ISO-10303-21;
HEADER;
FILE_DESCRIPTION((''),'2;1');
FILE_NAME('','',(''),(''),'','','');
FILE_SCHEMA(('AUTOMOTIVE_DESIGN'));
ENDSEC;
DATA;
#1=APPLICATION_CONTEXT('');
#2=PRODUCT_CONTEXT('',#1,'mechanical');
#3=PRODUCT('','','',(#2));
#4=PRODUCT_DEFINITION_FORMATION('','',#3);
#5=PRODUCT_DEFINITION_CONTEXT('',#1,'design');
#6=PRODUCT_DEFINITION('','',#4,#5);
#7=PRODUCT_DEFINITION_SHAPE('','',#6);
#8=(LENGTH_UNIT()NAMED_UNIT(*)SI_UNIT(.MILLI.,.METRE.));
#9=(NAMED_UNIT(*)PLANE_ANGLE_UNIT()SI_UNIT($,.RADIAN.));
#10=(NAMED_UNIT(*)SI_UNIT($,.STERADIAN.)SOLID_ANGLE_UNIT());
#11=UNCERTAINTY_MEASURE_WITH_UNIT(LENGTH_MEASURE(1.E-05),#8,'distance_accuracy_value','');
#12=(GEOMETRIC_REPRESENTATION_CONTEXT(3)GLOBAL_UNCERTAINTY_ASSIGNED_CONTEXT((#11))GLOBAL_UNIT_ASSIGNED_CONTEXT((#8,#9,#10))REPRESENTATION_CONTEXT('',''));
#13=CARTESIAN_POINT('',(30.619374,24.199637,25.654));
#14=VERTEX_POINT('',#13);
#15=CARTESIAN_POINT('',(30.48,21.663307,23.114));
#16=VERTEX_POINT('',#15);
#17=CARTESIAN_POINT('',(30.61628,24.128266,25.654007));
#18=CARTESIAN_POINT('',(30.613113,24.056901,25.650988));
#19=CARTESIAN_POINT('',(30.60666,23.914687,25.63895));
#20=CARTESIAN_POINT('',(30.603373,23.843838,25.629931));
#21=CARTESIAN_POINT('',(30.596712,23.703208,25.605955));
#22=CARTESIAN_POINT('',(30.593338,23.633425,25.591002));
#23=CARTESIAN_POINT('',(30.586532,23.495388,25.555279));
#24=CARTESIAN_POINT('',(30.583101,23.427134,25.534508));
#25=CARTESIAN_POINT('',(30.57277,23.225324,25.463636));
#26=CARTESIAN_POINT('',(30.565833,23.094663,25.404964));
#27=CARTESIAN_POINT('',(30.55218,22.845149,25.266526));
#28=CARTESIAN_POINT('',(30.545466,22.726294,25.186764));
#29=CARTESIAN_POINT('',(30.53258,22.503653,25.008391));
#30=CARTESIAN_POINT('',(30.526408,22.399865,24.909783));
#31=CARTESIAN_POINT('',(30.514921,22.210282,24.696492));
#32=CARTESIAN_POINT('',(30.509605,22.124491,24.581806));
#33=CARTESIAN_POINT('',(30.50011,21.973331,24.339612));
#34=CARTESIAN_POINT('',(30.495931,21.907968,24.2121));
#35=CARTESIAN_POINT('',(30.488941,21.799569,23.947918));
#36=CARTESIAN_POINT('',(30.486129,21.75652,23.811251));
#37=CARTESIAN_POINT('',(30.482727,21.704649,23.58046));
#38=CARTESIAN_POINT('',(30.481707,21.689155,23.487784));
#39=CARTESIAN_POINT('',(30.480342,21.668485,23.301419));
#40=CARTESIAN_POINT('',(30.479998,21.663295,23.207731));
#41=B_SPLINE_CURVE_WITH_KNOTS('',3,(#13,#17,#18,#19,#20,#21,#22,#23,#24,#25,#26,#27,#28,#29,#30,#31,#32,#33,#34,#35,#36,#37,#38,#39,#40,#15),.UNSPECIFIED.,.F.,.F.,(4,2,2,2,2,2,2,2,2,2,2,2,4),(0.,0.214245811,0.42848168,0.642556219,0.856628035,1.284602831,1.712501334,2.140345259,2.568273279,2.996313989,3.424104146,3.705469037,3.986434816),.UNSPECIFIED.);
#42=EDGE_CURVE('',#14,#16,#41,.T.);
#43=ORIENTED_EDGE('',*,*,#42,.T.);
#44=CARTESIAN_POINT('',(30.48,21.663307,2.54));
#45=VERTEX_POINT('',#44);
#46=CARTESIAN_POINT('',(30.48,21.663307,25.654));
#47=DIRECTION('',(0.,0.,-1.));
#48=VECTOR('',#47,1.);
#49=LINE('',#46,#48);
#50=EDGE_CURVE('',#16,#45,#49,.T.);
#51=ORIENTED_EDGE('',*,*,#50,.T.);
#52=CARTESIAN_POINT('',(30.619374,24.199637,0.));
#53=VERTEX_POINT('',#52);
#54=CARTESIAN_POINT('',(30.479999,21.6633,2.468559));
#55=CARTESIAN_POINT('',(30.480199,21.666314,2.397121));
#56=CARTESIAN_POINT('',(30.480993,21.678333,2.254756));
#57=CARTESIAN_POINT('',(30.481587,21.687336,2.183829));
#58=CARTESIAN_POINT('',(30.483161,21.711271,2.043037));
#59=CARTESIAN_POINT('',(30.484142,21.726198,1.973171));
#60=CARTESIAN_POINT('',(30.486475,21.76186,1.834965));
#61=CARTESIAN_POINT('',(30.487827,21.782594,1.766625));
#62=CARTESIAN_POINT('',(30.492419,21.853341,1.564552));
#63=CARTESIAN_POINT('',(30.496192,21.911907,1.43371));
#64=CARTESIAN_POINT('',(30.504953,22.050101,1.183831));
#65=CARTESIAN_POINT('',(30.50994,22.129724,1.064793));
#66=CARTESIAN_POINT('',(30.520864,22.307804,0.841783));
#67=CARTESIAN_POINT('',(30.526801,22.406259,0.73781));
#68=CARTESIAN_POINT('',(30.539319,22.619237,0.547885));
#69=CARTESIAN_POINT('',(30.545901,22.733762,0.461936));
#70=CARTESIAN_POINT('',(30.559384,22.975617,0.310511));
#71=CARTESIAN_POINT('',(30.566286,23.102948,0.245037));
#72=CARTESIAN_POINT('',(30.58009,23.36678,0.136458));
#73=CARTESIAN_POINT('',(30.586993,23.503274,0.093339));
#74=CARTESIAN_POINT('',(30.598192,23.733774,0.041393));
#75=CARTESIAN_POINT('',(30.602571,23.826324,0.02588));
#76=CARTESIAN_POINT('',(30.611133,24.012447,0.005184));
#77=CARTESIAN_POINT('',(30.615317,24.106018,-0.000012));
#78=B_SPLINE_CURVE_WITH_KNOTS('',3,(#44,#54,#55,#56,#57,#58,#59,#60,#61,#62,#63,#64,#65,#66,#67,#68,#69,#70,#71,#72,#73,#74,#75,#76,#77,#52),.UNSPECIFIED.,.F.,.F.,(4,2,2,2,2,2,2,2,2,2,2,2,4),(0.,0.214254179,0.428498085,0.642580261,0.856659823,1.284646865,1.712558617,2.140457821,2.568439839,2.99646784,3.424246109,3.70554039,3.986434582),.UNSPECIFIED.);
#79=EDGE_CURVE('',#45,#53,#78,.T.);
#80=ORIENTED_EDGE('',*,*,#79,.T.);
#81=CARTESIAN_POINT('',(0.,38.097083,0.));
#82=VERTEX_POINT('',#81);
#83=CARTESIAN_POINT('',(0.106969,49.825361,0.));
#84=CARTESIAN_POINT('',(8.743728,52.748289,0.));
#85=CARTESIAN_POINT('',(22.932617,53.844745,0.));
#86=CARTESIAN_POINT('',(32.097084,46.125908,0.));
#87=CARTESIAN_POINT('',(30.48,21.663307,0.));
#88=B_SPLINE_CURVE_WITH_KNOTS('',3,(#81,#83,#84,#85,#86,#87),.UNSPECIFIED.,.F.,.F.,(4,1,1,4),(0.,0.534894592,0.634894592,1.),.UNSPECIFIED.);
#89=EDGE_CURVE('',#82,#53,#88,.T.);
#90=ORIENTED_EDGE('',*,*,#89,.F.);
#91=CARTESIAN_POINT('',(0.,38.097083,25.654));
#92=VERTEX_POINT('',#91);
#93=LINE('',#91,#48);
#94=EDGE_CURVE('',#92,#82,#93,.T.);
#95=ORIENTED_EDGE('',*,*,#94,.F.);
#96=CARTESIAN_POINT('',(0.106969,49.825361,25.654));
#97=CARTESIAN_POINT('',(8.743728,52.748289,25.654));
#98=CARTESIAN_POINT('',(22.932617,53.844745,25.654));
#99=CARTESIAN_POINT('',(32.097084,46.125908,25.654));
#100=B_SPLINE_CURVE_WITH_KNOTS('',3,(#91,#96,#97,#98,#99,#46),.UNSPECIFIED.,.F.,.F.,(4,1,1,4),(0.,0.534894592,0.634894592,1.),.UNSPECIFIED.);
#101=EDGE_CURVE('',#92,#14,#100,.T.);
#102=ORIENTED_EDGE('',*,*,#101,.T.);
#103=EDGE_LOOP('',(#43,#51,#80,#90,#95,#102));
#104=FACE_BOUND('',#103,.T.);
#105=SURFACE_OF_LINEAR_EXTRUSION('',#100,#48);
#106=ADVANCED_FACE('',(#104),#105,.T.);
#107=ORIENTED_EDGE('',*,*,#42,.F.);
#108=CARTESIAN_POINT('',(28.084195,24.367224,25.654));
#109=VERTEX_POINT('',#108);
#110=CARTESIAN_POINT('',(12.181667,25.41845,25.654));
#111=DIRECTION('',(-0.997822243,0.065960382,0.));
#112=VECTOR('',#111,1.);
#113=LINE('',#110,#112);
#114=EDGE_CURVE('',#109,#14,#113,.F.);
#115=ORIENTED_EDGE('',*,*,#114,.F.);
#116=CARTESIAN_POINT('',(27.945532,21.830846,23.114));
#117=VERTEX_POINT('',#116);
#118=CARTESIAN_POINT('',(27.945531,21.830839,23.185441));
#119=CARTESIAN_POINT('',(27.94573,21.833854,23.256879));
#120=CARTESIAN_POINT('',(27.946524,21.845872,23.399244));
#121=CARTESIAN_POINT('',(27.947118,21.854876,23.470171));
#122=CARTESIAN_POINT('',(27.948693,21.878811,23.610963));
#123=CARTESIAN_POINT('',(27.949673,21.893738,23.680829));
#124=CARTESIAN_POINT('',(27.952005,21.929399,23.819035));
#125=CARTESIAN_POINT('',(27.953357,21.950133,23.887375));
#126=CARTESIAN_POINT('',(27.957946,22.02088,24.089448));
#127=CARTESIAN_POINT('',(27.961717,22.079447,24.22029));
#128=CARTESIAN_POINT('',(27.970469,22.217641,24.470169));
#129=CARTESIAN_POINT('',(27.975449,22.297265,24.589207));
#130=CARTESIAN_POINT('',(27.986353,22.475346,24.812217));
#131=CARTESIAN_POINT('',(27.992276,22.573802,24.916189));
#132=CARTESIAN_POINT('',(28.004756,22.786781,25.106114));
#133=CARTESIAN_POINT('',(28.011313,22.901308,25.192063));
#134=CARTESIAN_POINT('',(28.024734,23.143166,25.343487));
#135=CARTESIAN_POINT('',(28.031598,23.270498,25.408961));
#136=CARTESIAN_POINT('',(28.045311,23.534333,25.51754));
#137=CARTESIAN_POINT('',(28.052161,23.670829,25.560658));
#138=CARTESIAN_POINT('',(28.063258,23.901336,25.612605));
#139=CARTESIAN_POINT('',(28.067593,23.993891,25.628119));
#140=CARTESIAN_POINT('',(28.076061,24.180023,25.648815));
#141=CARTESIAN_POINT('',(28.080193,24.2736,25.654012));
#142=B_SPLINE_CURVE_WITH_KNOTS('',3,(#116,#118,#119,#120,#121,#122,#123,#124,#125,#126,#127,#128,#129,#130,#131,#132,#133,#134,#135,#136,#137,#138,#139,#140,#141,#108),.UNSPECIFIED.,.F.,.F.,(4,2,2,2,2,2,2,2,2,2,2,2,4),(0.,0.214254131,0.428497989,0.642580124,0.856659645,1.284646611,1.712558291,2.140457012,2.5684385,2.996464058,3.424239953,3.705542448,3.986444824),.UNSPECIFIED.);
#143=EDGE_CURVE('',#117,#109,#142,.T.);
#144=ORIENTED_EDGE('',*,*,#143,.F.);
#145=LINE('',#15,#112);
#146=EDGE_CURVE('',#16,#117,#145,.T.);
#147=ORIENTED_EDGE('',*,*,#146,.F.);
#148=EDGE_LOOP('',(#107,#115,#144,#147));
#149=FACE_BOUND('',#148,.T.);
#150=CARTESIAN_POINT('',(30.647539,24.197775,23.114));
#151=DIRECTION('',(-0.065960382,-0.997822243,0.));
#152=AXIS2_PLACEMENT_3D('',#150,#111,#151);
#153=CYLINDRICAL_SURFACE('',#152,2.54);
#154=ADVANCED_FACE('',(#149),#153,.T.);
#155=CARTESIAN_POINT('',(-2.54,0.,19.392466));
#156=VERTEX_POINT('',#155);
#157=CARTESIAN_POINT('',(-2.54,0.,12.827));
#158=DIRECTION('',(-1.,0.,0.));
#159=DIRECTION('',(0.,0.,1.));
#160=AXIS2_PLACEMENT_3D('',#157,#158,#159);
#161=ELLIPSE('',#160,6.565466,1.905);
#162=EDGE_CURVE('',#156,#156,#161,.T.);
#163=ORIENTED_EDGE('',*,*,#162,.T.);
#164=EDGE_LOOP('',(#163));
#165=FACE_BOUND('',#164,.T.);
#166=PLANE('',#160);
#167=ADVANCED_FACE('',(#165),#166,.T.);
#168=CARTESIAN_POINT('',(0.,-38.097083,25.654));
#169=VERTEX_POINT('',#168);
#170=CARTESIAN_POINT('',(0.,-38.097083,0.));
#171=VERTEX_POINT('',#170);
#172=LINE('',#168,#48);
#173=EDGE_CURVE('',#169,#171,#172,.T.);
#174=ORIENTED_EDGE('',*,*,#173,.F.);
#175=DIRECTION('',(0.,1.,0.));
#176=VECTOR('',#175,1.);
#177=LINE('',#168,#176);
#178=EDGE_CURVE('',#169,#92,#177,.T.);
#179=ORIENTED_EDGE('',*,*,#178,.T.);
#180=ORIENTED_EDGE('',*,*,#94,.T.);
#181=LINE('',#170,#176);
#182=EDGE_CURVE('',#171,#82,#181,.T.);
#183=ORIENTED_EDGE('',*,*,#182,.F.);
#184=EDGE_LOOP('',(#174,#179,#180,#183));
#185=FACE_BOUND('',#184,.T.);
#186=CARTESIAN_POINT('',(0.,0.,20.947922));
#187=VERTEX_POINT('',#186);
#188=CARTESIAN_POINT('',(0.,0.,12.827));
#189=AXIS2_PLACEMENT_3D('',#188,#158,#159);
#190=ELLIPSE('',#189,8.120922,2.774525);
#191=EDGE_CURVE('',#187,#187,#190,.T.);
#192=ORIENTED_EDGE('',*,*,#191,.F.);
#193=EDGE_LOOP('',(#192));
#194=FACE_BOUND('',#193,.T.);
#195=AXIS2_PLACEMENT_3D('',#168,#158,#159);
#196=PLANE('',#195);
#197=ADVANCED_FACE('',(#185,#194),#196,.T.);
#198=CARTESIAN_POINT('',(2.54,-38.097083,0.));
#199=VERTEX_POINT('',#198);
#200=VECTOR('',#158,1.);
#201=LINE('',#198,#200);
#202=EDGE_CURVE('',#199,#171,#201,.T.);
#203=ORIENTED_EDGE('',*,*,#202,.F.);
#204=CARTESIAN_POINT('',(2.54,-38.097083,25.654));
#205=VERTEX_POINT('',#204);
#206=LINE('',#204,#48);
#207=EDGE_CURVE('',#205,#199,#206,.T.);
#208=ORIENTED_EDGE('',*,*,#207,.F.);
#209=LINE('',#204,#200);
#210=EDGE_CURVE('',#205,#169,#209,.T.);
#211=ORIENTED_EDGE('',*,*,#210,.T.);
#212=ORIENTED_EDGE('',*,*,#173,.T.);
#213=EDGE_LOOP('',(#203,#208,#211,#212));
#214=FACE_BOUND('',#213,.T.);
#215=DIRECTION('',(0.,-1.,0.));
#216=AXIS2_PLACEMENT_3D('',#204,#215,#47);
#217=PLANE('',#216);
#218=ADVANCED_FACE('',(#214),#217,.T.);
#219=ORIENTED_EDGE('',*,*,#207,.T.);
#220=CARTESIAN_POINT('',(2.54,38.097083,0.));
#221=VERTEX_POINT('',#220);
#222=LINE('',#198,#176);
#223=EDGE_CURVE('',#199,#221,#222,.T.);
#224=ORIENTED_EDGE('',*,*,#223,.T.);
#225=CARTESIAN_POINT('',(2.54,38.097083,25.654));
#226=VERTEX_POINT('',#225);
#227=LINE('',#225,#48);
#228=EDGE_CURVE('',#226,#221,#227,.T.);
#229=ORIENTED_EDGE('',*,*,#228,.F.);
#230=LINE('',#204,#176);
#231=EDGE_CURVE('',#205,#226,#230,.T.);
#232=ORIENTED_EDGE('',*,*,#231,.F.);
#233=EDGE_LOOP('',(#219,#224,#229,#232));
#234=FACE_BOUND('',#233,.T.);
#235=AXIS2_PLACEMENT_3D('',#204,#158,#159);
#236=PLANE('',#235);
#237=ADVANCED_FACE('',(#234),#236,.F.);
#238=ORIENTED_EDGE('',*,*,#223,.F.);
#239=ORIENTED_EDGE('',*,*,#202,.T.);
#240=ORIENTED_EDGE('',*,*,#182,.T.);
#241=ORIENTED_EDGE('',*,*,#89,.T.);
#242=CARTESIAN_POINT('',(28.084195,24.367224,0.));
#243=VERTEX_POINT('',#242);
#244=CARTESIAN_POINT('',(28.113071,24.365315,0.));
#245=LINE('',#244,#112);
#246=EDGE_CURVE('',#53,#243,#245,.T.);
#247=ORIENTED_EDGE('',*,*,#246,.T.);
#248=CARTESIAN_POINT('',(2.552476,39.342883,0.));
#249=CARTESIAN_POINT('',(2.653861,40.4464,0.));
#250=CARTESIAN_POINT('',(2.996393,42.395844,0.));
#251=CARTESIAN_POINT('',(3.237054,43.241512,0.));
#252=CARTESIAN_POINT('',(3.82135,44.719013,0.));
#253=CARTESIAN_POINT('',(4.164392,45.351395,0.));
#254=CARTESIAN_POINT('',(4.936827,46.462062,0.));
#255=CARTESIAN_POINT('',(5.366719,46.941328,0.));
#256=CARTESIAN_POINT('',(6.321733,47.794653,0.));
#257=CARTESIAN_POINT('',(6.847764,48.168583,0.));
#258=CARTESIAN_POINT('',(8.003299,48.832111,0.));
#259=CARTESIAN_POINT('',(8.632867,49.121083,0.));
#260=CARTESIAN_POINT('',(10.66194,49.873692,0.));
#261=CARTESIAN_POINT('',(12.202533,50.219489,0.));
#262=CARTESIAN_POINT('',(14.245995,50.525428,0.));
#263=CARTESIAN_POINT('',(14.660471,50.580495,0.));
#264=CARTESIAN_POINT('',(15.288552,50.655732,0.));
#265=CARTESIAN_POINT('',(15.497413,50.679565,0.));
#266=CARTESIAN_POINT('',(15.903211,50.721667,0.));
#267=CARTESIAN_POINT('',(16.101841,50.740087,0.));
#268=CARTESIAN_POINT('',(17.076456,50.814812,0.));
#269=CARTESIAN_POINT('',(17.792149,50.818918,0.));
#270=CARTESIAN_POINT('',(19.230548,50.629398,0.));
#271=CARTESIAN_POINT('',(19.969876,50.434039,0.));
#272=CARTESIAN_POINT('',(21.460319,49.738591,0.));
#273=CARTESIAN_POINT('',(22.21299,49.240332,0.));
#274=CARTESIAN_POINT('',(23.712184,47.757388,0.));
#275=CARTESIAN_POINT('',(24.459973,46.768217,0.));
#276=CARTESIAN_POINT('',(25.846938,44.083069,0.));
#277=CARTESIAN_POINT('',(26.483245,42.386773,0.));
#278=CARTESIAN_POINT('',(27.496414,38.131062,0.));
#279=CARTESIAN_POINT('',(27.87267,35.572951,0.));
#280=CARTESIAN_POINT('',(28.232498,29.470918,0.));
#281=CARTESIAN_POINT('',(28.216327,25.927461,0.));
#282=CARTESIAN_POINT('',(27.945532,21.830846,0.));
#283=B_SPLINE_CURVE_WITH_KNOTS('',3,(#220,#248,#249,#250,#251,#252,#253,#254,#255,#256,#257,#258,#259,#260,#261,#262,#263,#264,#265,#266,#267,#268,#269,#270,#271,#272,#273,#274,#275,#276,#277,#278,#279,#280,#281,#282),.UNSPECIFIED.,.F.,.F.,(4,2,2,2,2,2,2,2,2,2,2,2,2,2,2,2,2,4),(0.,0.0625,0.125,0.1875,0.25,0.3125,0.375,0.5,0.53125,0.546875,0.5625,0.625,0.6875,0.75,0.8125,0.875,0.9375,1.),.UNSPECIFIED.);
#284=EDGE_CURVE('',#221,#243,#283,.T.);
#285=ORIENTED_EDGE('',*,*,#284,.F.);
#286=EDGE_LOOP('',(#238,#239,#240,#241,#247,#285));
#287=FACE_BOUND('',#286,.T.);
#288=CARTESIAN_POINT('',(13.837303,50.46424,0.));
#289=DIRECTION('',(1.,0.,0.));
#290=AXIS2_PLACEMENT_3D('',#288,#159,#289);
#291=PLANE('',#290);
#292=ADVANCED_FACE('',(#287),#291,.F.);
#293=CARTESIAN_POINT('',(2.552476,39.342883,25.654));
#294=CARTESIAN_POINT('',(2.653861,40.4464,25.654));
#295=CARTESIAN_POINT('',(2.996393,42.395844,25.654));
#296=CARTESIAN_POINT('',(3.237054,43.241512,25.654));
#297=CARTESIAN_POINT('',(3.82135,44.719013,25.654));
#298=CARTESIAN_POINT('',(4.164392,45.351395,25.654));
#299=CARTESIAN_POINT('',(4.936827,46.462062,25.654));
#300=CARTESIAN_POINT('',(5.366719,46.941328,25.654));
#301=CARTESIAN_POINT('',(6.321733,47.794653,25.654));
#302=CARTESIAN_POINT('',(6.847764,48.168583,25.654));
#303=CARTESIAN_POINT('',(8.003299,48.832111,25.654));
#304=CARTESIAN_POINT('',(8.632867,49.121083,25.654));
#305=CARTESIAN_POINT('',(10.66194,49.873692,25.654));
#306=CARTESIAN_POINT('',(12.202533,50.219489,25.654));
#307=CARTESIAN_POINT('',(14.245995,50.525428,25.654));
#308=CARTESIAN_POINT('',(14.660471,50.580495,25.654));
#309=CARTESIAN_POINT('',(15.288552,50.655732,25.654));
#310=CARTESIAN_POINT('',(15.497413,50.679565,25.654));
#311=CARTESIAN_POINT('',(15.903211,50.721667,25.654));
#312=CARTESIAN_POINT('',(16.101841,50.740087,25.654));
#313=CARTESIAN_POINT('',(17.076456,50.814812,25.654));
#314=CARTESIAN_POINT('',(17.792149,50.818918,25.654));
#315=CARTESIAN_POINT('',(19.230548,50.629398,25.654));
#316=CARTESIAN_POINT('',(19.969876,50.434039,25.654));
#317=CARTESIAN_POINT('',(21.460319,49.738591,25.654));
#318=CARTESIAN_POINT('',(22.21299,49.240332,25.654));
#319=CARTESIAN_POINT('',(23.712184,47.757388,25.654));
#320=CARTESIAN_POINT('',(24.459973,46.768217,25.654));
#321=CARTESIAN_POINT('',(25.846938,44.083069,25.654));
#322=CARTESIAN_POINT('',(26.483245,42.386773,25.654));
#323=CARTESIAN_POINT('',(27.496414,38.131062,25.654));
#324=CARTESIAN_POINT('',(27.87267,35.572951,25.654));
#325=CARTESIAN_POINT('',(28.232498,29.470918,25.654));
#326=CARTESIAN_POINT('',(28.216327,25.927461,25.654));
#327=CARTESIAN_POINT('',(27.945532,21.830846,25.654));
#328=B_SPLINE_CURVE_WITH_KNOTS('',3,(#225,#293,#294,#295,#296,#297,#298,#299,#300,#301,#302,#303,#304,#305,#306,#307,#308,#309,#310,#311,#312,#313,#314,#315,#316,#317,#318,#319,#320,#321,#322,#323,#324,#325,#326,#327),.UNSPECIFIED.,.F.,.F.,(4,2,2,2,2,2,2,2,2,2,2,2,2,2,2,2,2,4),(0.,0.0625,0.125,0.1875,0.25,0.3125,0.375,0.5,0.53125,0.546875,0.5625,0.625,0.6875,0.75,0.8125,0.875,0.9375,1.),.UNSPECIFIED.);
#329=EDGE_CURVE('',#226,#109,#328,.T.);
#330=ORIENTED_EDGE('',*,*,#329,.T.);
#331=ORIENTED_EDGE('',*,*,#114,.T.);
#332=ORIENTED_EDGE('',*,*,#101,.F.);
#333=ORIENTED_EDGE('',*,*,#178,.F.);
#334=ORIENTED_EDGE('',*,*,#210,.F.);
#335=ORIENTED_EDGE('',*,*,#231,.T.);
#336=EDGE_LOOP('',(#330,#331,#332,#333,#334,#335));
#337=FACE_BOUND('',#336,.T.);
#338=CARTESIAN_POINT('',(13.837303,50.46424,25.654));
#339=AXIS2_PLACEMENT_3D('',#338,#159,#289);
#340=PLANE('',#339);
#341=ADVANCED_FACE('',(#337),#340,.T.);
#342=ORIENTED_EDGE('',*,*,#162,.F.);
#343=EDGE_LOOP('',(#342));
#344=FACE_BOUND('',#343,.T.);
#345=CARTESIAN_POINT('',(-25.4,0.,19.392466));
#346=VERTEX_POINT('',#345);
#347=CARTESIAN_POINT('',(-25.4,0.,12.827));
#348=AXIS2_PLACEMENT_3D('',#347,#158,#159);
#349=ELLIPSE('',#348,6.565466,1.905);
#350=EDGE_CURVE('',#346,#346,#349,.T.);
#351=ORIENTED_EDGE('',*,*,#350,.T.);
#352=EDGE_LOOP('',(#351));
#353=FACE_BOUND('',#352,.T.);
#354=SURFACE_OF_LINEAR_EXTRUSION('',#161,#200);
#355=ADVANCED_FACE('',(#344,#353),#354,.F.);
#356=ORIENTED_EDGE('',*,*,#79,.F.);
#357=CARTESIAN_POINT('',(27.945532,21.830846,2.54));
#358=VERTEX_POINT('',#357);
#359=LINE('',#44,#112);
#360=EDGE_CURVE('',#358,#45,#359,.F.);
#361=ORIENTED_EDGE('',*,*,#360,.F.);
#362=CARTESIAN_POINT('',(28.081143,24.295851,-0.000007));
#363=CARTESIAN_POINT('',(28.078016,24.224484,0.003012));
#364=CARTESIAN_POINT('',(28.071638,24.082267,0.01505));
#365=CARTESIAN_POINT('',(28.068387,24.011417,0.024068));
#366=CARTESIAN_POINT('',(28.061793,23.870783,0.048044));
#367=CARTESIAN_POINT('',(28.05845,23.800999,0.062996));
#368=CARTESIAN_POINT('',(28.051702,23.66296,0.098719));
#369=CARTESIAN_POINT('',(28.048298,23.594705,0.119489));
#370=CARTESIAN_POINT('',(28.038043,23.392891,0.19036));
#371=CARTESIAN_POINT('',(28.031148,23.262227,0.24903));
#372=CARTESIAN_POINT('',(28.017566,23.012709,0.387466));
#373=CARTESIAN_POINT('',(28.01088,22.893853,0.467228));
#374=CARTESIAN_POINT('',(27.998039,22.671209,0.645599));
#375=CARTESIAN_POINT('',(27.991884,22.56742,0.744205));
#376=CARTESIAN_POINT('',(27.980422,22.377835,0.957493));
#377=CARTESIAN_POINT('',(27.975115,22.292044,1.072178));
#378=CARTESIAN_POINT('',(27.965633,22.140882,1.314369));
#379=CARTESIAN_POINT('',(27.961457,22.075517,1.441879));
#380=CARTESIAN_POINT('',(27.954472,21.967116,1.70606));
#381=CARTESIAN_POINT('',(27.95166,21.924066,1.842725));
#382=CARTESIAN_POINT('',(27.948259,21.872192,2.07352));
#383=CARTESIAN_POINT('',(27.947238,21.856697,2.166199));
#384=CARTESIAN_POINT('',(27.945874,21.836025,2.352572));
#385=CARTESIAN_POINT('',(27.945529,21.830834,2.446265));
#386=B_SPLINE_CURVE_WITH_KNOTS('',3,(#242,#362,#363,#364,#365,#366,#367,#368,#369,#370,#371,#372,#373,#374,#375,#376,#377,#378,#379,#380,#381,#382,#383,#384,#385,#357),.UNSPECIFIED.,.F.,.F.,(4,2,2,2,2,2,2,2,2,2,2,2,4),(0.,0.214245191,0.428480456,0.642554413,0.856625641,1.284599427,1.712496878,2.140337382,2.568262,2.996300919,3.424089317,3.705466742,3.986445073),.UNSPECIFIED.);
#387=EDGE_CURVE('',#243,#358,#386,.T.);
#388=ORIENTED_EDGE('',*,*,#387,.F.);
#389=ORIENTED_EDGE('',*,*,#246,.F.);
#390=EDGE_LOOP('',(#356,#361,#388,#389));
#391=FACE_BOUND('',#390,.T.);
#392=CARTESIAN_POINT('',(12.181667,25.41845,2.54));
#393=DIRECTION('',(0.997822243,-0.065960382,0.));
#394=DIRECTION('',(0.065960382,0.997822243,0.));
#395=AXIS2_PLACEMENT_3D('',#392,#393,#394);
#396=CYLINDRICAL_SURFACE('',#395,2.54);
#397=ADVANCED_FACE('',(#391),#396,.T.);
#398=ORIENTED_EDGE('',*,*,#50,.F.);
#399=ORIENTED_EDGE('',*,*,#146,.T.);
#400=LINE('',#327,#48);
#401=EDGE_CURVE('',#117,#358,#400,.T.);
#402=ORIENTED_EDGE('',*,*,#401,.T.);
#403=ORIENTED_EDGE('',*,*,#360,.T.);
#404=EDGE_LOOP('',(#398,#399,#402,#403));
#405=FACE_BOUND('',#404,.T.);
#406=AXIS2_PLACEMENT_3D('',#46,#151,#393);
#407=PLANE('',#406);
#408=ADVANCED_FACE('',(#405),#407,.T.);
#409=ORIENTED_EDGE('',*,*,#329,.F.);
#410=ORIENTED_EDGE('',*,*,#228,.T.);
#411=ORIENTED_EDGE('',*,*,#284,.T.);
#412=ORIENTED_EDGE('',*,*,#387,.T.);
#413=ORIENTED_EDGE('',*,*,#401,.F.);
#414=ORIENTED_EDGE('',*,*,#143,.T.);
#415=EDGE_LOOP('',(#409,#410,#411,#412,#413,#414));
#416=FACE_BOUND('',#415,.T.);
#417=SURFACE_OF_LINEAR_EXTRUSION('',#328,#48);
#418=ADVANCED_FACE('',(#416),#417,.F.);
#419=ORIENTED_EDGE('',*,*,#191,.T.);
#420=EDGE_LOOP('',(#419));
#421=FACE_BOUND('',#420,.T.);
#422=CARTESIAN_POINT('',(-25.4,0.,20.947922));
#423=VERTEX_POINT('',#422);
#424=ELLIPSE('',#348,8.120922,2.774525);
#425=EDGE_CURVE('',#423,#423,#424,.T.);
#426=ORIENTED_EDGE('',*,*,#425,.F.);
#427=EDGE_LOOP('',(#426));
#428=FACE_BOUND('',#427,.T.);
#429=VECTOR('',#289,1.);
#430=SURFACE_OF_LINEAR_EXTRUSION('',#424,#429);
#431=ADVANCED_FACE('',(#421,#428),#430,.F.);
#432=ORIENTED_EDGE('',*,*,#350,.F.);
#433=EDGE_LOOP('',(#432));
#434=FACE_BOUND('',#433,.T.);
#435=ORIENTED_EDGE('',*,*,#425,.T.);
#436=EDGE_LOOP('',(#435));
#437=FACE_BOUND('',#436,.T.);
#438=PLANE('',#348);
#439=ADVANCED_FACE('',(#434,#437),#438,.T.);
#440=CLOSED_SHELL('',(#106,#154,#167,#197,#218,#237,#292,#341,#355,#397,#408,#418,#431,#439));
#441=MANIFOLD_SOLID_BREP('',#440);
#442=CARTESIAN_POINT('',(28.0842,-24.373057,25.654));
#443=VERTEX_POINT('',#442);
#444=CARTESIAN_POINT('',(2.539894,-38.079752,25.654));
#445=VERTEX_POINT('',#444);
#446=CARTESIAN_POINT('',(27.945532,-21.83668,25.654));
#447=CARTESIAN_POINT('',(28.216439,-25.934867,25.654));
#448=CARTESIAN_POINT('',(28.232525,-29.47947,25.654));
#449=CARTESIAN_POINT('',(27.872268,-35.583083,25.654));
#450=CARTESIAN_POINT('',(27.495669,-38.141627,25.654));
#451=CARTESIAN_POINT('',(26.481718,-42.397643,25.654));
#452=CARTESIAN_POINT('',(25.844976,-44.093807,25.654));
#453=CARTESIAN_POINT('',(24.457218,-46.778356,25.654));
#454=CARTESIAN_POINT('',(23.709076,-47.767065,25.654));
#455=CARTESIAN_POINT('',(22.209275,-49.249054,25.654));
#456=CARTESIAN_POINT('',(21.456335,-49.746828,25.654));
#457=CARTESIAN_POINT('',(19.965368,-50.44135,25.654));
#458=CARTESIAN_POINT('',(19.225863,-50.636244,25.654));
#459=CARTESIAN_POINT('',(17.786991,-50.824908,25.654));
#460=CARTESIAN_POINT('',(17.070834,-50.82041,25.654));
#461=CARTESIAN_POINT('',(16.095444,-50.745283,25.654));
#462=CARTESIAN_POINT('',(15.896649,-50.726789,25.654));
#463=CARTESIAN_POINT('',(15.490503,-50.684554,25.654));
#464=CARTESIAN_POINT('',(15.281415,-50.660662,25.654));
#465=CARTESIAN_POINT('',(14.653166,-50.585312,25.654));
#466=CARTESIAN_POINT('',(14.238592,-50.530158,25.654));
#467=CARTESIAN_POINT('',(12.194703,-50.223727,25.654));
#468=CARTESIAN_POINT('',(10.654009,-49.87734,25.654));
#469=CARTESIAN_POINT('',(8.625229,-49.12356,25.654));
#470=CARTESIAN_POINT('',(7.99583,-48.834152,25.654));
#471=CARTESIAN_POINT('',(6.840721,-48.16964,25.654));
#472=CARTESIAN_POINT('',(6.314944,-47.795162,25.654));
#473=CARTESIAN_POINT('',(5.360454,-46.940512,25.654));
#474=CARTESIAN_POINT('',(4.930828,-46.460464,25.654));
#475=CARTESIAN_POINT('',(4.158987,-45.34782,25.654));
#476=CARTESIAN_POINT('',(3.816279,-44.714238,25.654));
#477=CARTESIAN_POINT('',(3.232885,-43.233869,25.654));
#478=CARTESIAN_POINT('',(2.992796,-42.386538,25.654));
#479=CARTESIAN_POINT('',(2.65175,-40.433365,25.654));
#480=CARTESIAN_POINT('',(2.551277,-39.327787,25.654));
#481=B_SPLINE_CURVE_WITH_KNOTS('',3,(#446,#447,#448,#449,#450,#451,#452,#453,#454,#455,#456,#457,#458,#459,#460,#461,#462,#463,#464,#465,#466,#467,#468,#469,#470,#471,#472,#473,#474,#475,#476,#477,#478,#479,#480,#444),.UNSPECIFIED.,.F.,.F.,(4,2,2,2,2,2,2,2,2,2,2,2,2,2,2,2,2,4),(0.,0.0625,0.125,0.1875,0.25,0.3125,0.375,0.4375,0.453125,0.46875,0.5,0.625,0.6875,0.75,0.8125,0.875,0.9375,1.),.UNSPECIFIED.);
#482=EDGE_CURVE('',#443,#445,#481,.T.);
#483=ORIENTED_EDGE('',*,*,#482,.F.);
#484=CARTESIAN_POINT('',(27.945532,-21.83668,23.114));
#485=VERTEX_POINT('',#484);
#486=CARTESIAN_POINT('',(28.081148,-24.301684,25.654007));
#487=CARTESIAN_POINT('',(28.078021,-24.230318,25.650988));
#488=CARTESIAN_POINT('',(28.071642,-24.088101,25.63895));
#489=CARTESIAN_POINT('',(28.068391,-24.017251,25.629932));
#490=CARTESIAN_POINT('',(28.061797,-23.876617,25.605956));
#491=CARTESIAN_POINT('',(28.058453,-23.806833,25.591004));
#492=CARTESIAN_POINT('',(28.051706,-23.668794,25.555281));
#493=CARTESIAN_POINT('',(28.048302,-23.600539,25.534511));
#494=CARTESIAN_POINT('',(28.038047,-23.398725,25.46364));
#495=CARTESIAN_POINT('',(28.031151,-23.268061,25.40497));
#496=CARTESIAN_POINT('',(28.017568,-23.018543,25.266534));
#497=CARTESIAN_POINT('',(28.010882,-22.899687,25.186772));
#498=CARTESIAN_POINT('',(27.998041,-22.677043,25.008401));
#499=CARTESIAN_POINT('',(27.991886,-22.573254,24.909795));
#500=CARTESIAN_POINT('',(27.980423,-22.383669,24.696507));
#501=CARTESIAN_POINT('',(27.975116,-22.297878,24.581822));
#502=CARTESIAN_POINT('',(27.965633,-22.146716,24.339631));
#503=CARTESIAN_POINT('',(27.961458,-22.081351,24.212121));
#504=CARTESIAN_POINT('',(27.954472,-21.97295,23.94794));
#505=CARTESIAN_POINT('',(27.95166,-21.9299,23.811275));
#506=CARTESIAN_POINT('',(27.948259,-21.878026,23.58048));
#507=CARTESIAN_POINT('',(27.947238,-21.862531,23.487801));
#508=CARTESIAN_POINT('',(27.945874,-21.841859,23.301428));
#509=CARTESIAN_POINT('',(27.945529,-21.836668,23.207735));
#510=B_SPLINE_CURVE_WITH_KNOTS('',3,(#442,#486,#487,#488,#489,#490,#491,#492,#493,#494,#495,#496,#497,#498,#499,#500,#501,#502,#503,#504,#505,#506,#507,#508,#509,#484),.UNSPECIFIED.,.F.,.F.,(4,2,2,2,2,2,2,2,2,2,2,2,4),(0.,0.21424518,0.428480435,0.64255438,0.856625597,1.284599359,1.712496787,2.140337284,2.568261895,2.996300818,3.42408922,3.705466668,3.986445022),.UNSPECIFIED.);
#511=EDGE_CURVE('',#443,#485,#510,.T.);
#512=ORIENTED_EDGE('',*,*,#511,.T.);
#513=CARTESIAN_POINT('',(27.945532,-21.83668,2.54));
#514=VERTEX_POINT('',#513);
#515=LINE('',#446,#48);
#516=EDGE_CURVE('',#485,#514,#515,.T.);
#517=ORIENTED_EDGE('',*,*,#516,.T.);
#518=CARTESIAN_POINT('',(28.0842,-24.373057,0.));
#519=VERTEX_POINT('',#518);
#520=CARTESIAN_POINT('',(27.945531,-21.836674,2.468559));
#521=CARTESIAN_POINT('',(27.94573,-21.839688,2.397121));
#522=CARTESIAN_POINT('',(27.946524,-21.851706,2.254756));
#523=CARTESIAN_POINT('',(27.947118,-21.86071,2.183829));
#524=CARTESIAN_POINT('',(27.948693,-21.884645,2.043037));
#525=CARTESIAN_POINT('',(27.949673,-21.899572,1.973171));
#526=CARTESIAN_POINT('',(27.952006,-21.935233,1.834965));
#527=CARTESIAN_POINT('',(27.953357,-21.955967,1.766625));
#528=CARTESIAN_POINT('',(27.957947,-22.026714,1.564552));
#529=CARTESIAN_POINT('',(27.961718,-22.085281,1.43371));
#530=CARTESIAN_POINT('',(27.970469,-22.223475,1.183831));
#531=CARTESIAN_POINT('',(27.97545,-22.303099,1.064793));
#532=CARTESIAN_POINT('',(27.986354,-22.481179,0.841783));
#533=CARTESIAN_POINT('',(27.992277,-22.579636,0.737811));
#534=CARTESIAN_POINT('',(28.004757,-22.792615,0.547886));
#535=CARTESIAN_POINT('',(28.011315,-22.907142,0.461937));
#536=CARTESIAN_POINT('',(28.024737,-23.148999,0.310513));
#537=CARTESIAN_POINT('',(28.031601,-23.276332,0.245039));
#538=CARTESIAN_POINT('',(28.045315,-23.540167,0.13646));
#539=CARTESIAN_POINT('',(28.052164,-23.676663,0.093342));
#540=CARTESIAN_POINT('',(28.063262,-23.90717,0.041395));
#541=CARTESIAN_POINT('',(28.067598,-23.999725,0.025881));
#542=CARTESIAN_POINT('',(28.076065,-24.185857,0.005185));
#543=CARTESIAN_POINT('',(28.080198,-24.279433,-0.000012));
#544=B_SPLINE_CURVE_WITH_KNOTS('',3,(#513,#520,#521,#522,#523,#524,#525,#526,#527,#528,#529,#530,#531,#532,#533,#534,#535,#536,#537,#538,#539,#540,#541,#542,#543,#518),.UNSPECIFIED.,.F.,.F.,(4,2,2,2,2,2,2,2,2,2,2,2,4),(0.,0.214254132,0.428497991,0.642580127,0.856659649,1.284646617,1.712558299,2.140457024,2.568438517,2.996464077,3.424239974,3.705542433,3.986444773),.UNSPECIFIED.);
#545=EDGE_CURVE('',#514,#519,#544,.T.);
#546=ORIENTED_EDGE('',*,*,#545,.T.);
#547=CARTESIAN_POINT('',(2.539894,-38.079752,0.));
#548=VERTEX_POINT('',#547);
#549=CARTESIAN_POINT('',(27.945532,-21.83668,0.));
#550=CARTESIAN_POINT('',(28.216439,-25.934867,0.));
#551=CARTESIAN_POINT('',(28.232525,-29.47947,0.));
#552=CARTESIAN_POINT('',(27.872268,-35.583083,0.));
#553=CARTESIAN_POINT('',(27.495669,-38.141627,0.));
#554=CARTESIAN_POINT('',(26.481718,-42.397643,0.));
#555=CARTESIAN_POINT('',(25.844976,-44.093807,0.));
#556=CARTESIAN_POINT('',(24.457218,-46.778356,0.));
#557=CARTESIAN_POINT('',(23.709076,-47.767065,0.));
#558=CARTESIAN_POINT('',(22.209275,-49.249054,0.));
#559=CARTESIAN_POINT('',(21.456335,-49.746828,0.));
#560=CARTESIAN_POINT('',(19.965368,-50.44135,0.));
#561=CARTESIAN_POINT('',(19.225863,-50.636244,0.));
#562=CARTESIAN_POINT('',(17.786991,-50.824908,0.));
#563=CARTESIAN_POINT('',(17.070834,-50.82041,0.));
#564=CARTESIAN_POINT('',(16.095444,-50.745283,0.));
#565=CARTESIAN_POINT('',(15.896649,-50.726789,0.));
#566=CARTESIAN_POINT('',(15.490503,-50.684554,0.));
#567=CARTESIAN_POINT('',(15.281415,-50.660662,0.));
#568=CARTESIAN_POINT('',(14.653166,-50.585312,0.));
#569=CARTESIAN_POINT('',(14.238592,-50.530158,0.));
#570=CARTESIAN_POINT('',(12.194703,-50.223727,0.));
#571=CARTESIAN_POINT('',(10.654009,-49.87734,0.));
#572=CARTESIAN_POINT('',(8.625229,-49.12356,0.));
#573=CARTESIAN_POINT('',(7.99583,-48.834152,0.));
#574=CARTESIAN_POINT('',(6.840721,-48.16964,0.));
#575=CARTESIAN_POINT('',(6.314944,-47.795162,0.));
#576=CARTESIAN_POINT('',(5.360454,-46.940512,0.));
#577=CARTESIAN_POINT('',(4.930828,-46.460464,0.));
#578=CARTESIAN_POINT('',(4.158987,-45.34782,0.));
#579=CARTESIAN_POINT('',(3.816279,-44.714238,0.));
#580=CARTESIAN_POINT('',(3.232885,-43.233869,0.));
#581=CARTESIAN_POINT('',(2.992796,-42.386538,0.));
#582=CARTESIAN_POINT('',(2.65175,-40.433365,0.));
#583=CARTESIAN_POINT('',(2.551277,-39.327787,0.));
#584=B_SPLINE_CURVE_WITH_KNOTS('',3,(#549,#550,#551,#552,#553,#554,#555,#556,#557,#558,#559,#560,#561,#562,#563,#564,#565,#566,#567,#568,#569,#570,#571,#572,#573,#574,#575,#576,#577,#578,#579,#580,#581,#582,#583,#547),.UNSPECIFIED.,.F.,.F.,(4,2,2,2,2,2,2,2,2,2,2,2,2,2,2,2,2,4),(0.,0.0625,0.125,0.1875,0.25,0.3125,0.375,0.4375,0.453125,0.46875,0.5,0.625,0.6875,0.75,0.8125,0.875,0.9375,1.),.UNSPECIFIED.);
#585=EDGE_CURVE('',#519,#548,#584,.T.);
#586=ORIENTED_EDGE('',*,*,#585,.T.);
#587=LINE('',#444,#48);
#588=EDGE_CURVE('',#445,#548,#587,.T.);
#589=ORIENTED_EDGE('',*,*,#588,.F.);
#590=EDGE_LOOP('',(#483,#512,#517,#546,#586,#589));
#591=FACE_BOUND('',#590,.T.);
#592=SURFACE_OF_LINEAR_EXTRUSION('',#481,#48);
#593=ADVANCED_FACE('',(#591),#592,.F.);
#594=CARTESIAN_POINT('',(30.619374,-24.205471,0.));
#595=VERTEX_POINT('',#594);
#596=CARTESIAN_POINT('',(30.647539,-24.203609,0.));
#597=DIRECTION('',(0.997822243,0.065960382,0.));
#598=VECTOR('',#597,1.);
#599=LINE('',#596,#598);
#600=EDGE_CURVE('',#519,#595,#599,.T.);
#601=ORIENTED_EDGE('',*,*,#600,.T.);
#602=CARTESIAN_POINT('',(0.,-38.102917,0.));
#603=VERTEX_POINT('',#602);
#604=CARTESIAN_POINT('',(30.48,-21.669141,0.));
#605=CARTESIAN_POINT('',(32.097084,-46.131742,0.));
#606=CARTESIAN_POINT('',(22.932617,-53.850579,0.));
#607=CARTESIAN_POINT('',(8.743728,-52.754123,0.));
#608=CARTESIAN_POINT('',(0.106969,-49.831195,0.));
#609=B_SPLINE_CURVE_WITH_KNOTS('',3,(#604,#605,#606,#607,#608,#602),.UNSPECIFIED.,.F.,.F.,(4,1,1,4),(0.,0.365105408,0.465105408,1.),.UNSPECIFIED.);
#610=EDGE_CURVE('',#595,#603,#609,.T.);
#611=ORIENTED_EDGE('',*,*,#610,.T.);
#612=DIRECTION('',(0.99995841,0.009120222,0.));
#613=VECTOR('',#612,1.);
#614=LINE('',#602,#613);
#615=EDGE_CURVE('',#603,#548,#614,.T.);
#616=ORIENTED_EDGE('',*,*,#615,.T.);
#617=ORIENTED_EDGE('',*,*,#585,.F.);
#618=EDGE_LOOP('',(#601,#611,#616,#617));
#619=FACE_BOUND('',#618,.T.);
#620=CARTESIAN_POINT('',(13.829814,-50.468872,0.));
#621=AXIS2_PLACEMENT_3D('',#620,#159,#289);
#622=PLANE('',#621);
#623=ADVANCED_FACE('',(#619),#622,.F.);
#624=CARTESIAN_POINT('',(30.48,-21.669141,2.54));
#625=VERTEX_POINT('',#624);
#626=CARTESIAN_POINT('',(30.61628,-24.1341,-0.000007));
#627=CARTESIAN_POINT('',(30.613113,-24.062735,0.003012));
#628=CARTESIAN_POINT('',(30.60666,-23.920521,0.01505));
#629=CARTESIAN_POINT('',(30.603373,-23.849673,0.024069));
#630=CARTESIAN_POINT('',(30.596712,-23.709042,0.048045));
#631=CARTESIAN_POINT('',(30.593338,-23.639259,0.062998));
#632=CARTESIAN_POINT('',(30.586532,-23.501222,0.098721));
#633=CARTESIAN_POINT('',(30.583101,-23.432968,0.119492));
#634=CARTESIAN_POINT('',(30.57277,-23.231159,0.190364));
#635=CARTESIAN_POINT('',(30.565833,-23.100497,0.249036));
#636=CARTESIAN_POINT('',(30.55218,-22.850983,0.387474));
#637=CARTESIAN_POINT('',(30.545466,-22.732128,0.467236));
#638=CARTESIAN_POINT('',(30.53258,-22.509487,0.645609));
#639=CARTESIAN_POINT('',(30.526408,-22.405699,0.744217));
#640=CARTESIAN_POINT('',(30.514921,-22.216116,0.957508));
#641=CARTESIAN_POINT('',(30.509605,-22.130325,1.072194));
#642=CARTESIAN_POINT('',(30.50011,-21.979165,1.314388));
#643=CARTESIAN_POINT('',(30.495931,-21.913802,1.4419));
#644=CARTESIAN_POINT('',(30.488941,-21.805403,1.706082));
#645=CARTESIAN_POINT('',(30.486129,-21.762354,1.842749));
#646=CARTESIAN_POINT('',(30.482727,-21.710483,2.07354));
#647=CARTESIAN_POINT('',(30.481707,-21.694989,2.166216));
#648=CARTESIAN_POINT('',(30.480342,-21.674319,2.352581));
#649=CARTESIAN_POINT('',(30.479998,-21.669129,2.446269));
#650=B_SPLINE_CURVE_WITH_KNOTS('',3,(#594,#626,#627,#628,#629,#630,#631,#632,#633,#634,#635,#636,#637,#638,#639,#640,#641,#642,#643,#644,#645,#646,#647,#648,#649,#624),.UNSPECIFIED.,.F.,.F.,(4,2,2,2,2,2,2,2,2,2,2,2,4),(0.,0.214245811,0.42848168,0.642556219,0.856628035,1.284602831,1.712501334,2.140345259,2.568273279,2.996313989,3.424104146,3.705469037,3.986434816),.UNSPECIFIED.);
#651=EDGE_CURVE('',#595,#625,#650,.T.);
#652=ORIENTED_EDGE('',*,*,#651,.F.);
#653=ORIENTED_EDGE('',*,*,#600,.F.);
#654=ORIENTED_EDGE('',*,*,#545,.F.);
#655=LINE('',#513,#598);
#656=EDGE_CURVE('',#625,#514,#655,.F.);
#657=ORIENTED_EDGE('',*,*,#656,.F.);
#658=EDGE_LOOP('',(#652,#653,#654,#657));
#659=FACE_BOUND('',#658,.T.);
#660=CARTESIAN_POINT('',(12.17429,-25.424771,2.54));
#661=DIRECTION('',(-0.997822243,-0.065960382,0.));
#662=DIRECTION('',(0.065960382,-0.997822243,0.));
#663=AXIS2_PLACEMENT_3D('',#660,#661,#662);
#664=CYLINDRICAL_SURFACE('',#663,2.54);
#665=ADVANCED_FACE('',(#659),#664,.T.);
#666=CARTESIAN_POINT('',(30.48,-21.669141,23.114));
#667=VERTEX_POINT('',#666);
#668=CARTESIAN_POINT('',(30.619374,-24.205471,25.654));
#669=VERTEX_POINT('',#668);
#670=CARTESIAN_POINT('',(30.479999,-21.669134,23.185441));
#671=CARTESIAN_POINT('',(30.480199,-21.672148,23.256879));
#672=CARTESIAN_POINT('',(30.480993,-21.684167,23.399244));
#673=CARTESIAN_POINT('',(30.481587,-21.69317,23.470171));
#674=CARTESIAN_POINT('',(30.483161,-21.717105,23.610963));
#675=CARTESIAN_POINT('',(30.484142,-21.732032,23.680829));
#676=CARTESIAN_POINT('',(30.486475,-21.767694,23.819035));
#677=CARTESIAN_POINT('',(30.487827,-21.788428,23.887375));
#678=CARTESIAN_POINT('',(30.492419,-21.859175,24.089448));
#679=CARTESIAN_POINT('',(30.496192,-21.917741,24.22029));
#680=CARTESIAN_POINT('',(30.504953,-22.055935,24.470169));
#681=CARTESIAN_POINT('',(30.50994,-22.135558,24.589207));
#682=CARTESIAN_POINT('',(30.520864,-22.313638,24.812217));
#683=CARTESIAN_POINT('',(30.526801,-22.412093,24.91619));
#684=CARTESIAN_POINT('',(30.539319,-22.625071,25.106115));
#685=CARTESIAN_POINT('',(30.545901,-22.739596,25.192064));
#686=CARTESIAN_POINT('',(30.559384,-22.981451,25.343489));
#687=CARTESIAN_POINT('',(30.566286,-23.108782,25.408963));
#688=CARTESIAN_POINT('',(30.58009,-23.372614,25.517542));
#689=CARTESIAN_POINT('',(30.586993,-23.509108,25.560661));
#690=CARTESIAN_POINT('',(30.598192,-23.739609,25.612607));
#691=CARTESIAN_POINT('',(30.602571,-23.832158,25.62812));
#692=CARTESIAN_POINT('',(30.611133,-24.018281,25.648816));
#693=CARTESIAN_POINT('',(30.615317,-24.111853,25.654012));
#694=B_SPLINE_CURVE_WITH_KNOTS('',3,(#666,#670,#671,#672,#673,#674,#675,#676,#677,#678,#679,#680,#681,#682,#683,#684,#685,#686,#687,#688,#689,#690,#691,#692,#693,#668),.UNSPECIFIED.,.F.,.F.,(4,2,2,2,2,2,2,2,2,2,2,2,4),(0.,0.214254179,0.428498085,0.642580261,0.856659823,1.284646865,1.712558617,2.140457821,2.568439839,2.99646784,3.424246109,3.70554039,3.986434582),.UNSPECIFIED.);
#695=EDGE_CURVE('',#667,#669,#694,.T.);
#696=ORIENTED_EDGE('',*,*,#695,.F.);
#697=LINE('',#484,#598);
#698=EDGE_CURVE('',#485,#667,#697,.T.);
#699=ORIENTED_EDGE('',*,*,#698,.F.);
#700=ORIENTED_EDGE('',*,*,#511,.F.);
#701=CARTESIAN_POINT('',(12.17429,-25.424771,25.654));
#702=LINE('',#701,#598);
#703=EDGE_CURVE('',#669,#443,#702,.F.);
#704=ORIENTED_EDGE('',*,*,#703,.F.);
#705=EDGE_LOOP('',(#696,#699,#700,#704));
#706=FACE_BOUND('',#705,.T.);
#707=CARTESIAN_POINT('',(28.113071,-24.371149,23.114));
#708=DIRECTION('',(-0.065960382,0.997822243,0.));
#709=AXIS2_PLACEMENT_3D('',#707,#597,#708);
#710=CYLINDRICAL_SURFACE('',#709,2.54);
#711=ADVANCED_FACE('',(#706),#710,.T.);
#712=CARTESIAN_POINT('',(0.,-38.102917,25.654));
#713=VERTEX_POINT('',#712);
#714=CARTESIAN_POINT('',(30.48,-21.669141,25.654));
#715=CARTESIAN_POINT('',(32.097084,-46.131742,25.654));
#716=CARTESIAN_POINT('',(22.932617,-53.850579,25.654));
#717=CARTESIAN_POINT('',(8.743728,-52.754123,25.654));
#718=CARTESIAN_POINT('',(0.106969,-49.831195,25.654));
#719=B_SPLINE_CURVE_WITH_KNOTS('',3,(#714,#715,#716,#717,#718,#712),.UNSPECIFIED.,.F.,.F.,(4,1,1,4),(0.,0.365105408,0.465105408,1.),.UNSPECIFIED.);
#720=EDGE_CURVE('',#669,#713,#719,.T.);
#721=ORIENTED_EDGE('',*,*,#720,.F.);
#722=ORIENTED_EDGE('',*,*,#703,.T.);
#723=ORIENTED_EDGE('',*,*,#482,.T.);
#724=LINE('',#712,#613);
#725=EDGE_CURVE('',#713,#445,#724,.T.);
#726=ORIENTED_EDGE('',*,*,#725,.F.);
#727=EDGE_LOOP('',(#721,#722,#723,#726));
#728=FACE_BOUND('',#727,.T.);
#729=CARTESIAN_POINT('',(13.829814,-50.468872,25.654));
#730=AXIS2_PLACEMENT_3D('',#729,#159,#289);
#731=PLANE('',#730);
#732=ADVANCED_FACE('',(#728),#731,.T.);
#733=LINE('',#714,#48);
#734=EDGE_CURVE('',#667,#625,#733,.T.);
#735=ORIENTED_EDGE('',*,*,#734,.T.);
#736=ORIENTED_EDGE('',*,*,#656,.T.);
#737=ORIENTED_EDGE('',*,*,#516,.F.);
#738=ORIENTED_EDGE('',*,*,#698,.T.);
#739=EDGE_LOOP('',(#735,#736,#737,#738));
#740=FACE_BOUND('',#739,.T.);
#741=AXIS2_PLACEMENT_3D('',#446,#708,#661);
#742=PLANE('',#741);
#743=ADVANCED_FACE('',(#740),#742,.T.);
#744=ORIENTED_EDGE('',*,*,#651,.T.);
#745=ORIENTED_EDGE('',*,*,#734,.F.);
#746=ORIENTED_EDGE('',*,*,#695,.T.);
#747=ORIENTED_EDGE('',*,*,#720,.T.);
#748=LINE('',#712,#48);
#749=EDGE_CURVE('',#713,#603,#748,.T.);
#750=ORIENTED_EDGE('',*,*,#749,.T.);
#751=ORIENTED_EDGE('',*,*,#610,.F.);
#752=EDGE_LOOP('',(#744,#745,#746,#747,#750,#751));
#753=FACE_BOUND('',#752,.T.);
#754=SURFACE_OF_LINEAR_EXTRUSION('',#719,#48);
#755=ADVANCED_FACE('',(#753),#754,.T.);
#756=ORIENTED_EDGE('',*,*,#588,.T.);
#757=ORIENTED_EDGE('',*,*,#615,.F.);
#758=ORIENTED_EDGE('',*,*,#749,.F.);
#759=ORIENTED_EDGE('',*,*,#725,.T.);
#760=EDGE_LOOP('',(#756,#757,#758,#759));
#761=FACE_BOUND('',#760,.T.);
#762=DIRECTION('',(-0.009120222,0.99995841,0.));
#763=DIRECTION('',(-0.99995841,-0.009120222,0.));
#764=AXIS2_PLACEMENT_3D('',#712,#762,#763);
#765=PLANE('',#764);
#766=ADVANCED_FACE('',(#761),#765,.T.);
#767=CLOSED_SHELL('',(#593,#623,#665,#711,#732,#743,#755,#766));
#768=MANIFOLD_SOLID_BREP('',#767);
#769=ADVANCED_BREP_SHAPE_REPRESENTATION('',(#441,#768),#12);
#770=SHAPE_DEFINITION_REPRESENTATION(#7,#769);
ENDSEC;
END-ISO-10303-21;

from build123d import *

# Parameters (mm, degrees)
EXTRUDE_THIN1_DEPTH   = 25.654
EXTRUDE_THIN1_2_DEPTH = 25.654
SKETCH4_RX            = 8.120921881
SKETCH4_RY            = 2.774524796
BOSS_EXTRUDE1_DEPTH   = 25.4
SKETCH5_RX            = 6.565465979
SKETCH5_RY            = 1.905
CUT_EXTRUDE1_DEPTH    = 22.86
FILLET1_R             = 2.54
FILLET2_R             = 2.54


# Read off the part's stored shape, not the designer's step: Extrude-Thin1
with BuildPart() as part:
    # Extrude-Thin1 outline → Extrude-Thin1 (new body)
    with BuildSketch(Plane.XY):
        with BuildLine():
            Line((30.48, -21.66914096), (27.945531504, -21.836680329))
            add(Edge.make_bspline(
                [(27.945531504, -21.836680329), (28.216439415, -25.93486673), (28.23252486, -29.479469819), (27.872267932, -35.583082717), (27.495669128, -38.141627179), (26.481717741, -42.397642841), (25.844975686, -44.093807332), (24.457217637, -46.778355936), (23.709075743, -47.767064676), (22.209275028, -49.249054272), (21.456334771, -49.746827821), (19.965368397, -50.441349655), (19.225863185, -50.636243836), (17.786990757, -50.824907544), (17.07083353, -50.820409838), (16.095443713, -50.745282939), (15.896649021, -50.726788865), (15.490503236, -50.684553576), (15.281414749, -50.660661788), (14.653166379, -50.585312237), (14.238591647, -50.53015824), (12.194702947, -50.223727073), (10.654009092, -49.877340199), (8.625229356, -49.123559812), (7.995829874, -48.834151782), (6.840720894, -48.169639667), (6.314943902, -47.795162364), (5.360454433, -46.940512269), (4.930828424, -46.460464413), (4.158987377, -45.347819896), (3.816278634, -44.714238293), (3.232884788, -43.233869293), (2.992795748, -42.386537786), (2.651749825, -40.433365024), (2.551277196, -39.327787262), (2.539894361, -38.079751671)],
                knots=[0, 0, 0, 0, 0.0625, 0.0625, 0.125, 0.125, 0.1875, 0.1875, 0.25, 0.25, 0.3125, 0.3125, 0.375, 0.375, 0.4375, 0.4375, 0.453125, 0.453125, 0.46875, 0.46875, 0.5, 0.5, 0.625, 0.625, 0.6875, 0.6875, 0.75, 0.75, 0.8125, 0.8125, 0.875, 0.875, 0.9375, 0.9375, 1, 1, 1, 1], degree=3))
            Line((2.539894361, -38.079751671), (0, -38.102917034))
            add(Edge.make_bspline(
                [(30.48, -21.66914096), (32.097084155, -46.13174249), (22.932616936, -53.850579007), (8.743728035, -52.754122664), (0.106968945, -49.831194873), (0, -38.102917034)],
                knots=[0, 0, 0, 0, 0.365105408, 0.465105408, 1, 1, 1, 1], degree=3))
        make_face()
    extrude(amount=EXTRUDE_THIN1_DEPTH)

    # Fillet2
    fillet2_edges = [part.edges().sort_by_distance(p)[0] for p in [
        (29.212765752, -21.752910644, 25.654),
        (29.212765752, -21.752910644, 0),
    ]]
    fillet(fillet2_edges, radius=FILLET2_R)


with BuildPart() as body_2:
    # Extrude-Thin1 2 outline → Extrude-Thin1 2 (new body)
    with BuildSketch(Plane.XY):
        with BuildLine():
            Line((2.54, -38.097082966), (2.54, 38.097082966))
            add(Edge.make_bspline(
                [(2.54, 38.097082966), (2.55247561, 39.342882783), (2.653861042, 40.44639958), (2.996393497, 42.395844424), (3.237054423, 43.241511707), (3.821349871, 44.719012561), (4.164392201, 45.351394795), (4.936827462, 46.462062079), (5.366719378, 46.941327746), (6.321733103, 47.794653487), (6.847764322, 48.168583404), (8.003299385, 48.832110701), (8.632867302, 49.121083114), (10.66193968, 49.873691678), (12.202532613, 50.219488822), (14.245995135, 50.525427878), (14.660470529, 50.580495346), (15.288551787, 50.655731835), (15.497412831, 50.67956491), (15.903211301, 50.721667454), (16.10184127, 50.740086851), (17.076455676, 50.814812135), (17.792148896, 50.818917668), (19.230547776, 50.629398095), (19.96987556, 50.434038624), (21.460319225, 49.738590728), (22.212989851, 49.240331772), (23.712183679, 47.757387511), (24.45997348, 46.768216796), (25.846937805, 44.083068815), (26.483244577, 42.386773153), (27.496414466, 38.131062208), (27.872669783, 35.572950748), (28.232498094, 29.470917951), (28.216327109, 25.927460772), (27.945531504, 21.830846261)],
                knots=[0, 0, 0, 0, 0.0625, 0.0625, 0.125, 0.125, 0.1875, 0.1875, 0.25, 0.25, 0.3125, 0.3125, 0.375, 0.375, 0.5, 0.5, 0.53125, 0.53125, 0.546875, 0.546875, 0.5625, 0.5625, 0.625, 0.625, 0.6875, 0.6875, 0.75, 0.75, 0.8125, 0.8125, 0.875, 0.875, 0.9375, 0.9375, 1, 1, 1, 1], degree=3))
            Line((27.945531504, 21.830846261), (30.48, 21.663306891))
            add(Edge.make_bspline(
                [(0, 38.097082966), (0.106968945, 49.825360805), (8.743728035, 52.748288596), (22.932616936, 53.844744939), (32.097084155, 46.125908422), (30.48, 21.663306891)],
                knots=[0, 0, 0, 0, 0.534894592, 0.634894592, 1, 1, 1, 1], degree=3))
            Line((0, 38.097082966), (0, -38.097082966))
            Line((0, -38.097082966), (2.54, -38.097082966))
        make_face()
    extrude(amount=EXTRUDE_THIN1_2_DEPTH)

    # Sketch4 → Boss-Extrude1 (add)
    with BuildSketch(Plane.ZY):
        with Locations((12.827, 0)):
            Ellipse(SKETCH4_RX, SKETCH4_RY)
    extrude(amount=BOSS_EXTRUDE1_DEPTH)

    # Sketch5 → Cut-Extrude1 (cut)
    with BuildSketch(Plane.ZY.offset(25.4)):
        with Locations((12.827, 0)):
            Ellipse(SKETCH5_RX, SKETCH5_RY)
    extrude(amount=-CUT_EXTRUDE1_DEPTH, mode=Mode.SUBTRACT)

    # Fillet1
    fillet1_edges = [body_2.edges().sort_by_distance(p)[0] for p in [
        (29.212765752, 21.747076576, 0),
        (29.212765752, 21.747076576, 25.654),
    ]]
    fillet(fillet1_edges, radius=FILLET1_R)


solid = Compound([part.part, body_2.part])
